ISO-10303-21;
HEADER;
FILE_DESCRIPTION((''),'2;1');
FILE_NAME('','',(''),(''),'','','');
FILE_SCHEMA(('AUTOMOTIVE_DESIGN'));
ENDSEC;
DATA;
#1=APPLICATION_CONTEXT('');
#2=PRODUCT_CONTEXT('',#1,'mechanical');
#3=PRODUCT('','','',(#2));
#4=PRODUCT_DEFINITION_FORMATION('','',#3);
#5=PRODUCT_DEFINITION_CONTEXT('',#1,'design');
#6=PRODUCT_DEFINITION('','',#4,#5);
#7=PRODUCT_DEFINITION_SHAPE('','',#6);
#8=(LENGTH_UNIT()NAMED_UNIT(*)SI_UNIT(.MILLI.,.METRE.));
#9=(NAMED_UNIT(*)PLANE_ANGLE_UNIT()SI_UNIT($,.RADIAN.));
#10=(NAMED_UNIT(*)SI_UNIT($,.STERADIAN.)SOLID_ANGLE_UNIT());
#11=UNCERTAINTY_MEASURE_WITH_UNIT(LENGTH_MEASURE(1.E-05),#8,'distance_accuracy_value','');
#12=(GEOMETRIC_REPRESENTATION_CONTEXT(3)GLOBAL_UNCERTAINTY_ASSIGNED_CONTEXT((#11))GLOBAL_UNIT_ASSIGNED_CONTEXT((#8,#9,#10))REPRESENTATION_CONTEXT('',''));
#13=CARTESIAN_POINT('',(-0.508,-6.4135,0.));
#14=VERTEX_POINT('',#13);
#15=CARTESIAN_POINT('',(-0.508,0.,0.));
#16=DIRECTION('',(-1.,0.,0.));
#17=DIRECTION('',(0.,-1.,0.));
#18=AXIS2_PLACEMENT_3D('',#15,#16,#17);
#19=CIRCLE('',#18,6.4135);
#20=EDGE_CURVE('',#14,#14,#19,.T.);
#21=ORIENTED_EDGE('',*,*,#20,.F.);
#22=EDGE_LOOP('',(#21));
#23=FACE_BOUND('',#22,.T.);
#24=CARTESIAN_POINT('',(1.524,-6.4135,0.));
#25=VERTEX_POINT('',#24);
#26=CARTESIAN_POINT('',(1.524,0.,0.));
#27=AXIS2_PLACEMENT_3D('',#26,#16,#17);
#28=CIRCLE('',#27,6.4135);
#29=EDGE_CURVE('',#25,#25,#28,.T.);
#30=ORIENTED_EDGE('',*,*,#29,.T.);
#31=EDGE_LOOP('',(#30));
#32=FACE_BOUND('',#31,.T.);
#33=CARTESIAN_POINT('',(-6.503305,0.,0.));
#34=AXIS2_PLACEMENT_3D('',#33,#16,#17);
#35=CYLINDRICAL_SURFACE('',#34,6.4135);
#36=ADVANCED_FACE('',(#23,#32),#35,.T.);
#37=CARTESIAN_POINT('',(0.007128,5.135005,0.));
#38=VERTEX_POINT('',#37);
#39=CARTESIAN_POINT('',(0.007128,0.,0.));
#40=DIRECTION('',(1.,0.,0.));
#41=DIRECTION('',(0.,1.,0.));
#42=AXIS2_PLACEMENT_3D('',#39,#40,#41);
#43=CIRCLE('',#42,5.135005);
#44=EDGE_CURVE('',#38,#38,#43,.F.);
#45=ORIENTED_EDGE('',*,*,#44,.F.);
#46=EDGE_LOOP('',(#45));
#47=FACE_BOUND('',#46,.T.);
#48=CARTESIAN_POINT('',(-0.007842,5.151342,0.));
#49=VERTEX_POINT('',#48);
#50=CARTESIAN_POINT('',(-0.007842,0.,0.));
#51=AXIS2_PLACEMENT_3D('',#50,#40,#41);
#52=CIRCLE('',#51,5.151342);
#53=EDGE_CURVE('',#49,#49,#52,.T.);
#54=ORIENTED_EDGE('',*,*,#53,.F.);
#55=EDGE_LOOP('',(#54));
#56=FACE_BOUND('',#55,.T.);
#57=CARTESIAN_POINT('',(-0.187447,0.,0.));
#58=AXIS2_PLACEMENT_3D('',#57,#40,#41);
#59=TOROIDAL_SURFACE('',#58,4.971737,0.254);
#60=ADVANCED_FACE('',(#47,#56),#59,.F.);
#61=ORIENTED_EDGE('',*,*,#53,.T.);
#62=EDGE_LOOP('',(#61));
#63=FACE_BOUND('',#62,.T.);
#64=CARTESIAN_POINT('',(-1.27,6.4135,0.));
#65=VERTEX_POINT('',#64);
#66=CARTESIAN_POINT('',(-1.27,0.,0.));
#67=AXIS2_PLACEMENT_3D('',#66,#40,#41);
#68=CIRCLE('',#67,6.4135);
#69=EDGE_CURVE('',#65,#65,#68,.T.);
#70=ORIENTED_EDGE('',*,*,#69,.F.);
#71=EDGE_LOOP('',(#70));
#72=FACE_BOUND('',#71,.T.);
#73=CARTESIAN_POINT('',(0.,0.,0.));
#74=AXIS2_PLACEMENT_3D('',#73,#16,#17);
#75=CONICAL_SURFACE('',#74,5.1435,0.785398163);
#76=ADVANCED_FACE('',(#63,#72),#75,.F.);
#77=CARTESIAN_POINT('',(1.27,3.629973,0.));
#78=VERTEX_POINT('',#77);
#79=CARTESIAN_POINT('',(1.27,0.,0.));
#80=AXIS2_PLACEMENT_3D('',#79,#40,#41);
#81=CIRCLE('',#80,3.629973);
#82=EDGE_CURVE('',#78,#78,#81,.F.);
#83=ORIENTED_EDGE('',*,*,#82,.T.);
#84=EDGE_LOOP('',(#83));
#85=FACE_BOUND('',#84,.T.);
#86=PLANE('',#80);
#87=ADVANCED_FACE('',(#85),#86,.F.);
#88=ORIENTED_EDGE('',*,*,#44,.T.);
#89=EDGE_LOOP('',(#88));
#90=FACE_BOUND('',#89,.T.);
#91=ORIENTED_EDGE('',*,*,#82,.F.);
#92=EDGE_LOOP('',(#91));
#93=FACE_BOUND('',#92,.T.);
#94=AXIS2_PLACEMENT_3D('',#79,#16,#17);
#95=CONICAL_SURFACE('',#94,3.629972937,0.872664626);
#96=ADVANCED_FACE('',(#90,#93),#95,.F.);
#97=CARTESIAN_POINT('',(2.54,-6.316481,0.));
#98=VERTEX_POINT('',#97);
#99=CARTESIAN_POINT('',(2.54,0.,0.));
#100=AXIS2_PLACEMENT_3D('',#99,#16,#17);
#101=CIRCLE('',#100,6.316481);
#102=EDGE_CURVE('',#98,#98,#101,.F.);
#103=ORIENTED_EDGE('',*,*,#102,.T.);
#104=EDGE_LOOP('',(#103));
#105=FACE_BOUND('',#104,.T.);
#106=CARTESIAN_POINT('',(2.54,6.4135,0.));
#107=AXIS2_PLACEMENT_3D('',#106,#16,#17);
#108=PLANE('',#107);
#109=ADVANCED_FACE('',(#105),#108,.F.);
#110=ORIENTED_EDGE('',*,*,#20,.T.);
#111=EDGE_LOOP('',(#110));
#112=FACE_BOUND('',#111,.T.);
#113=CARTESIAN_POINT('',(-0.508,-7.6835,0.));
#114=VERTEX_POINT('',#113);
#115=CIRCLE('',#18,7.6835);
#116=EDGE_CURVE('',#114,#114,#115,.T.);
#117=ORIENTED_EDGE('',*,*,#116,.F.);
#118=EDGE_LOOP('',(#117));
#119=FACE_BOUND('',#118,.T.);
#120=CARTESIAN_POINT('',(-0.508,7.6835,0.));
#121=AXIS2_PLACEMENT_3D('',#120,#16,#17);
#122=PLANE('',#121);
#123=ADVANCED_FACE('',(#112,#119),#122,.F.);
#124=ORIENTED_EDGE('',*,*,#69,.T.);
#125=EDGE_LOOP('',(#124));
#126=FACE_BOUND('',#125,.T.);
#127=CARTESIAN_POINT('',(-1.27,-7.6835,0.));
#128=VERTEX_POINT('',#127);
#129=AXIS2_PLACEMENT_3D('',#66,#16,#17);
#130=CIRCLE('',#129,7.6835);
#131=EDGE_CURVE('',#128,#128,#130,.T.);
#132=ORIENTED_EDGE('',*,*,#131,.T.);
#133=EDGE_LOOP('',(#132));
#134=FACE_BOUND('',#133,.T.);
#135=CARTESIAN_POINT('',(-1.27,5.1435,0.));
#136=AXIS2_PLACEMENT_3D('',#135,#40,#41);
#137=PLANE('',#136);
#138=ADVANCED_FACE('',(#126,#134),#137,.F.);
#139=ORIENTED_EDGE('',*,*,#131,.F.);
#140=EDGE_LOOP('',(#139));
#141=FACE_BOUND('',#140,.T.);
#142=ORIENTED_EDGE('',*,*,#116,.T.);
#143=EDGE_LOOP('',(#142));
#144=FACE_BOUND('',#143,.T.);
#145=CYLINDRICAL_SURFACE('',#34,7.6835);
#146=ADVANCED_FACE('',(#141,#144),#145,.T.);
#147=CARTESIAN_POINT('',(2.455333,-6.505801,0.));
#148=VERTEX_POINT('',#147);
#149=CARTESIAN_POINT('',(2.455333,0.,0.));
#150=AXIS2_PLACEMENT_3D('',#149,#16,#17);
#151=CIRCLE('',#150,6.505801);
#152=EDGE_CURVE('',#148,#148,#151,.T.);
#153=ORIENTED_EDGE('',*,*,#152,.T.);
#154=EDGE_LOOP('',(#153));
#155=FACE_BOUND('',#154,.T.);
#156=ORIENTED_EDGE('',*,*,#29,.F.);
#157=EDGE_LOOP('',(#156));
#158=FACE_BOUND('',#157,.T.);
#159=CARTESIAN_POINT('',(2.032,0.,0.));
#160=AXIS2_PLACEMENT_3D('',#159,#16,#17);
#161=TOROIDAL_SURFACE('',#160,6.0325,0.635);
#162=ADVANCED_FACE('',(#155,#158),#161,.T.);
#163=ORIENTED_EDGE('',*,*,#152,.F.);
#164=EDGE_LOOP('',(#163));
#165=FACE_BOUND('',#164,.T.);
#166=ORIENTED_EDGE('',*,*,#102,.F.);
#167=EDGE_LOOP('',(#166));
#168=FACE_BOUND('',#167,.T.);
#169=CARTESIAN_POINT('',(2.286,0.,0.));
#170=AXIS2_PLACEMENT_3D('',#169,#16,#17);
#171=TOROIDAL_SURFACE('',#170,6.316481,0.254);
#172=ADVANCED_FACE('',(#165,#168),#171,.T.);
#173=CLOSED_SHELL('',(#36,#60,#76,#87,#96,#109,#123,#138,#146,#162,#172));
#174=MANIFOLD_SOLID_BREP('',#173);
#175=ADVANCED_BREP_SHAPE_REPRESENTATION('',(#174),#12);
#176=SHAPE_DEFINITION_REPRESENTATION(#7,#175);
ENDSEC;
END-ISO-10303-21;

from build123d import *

# Parameters (mm, degrees)
CHAMFER1_SIZE  = 1.27
CHAMFER1_SIZE2 = 1.513527063
FILLET1_R      = 0.254
CHAMFER3_SIZE  = 1.27
FILLET2_R      = 0.254


# Some blends are built 0.0001 mm under size
with BuildPart() as part:
    # Sketch1 → Revolve1 (revolve)
    with BuildSketch(Plane.XY, mode=Mode.PRIVATE) as revolve1_sk:
        with BuildLine():
            Line((-0.508, 7.6835), (-0.508, 6.4135))
            Line((-0.508, 6.4135), (1.524, 6.4135))
            ThreePointArc((1.524, 6.4135), (2.032, 6.6675), (2.54, 6.4135))
            Line((2.54, 6.4135), (2.54, 0))
            Line((2.54, 0), (1.27, 0))
            Line((1.27, 0), (1.27, 5.1435))
            Line((1.27, 5.1435), (-1.27, 5.1435))
            Line((-1.27, 5.1435), (-1.27, 7.6835))
            Line((-1.27, 7.6835), (-0.508, 7.6835))
        make_face()
    revolve(revolve1_sk.sketch.rotate(Axis((-6.503305215, 0, 0), (1, 0, 0)), 180), axis=Axis((-6.503305215, 0, 0), (1, 0, 0)))

    # Chamfer1
    chamfer1_edges = [part.edges().sort_by_distance(p)[0] for p in [
        (1.27, 5.1435, 0),
    ]]
    chamfer1_side = [part.faces().sort_by_distance(p)[0] for p in [
        (0, 5.1435, 0),
    ]]
    chamfer(chamfer1_edges, length=CHAMFER1_SIZE, length2=CHAMFER1_SIZE2, reference=chamfer1_side[0])

    # Fillet1
    fillet1_edges = [part.edges().sort_by_distance(p)[0] for p in [
        (2.54, 6.4135, 0),
    ]]
    fillet(fillet1_edges, radius=FILLET1_R)

    # Chamfer3
    chamfer3_edges = [part.edges().sort_by_distance(p)[0] for p in [
        (-1.27, 5.1435, 0),
    ]]
    chamfer(chamfer3_edges, length=CHAMFER3_SIZE - 0.0001)  # a hair under: the kernel refuses the full size

    # Fillet2
    # the kernel refuses this fillet: 0.254 mm, written as the material it adds along each edge
    with BuildSketch(Plane(origin=(0, 0, 0), x_dir=(0, -1, 0), z_dir=(0, 0, 1))) as fillet2_piece_1:
        with BuildLine():
            CenterArc((4.975502814, -0.190607075), FILLET2_R, 48.592790784, 1.407209216)
            Line((5.138770867, 0.003968214), (5.1435, 0))
            Line((5.1435, 0), (5.1435, -0.0001))
        make_face()
    revolve(axis=Axis((0, 0, 0), (1, 0, 0)))


solid = part.part
